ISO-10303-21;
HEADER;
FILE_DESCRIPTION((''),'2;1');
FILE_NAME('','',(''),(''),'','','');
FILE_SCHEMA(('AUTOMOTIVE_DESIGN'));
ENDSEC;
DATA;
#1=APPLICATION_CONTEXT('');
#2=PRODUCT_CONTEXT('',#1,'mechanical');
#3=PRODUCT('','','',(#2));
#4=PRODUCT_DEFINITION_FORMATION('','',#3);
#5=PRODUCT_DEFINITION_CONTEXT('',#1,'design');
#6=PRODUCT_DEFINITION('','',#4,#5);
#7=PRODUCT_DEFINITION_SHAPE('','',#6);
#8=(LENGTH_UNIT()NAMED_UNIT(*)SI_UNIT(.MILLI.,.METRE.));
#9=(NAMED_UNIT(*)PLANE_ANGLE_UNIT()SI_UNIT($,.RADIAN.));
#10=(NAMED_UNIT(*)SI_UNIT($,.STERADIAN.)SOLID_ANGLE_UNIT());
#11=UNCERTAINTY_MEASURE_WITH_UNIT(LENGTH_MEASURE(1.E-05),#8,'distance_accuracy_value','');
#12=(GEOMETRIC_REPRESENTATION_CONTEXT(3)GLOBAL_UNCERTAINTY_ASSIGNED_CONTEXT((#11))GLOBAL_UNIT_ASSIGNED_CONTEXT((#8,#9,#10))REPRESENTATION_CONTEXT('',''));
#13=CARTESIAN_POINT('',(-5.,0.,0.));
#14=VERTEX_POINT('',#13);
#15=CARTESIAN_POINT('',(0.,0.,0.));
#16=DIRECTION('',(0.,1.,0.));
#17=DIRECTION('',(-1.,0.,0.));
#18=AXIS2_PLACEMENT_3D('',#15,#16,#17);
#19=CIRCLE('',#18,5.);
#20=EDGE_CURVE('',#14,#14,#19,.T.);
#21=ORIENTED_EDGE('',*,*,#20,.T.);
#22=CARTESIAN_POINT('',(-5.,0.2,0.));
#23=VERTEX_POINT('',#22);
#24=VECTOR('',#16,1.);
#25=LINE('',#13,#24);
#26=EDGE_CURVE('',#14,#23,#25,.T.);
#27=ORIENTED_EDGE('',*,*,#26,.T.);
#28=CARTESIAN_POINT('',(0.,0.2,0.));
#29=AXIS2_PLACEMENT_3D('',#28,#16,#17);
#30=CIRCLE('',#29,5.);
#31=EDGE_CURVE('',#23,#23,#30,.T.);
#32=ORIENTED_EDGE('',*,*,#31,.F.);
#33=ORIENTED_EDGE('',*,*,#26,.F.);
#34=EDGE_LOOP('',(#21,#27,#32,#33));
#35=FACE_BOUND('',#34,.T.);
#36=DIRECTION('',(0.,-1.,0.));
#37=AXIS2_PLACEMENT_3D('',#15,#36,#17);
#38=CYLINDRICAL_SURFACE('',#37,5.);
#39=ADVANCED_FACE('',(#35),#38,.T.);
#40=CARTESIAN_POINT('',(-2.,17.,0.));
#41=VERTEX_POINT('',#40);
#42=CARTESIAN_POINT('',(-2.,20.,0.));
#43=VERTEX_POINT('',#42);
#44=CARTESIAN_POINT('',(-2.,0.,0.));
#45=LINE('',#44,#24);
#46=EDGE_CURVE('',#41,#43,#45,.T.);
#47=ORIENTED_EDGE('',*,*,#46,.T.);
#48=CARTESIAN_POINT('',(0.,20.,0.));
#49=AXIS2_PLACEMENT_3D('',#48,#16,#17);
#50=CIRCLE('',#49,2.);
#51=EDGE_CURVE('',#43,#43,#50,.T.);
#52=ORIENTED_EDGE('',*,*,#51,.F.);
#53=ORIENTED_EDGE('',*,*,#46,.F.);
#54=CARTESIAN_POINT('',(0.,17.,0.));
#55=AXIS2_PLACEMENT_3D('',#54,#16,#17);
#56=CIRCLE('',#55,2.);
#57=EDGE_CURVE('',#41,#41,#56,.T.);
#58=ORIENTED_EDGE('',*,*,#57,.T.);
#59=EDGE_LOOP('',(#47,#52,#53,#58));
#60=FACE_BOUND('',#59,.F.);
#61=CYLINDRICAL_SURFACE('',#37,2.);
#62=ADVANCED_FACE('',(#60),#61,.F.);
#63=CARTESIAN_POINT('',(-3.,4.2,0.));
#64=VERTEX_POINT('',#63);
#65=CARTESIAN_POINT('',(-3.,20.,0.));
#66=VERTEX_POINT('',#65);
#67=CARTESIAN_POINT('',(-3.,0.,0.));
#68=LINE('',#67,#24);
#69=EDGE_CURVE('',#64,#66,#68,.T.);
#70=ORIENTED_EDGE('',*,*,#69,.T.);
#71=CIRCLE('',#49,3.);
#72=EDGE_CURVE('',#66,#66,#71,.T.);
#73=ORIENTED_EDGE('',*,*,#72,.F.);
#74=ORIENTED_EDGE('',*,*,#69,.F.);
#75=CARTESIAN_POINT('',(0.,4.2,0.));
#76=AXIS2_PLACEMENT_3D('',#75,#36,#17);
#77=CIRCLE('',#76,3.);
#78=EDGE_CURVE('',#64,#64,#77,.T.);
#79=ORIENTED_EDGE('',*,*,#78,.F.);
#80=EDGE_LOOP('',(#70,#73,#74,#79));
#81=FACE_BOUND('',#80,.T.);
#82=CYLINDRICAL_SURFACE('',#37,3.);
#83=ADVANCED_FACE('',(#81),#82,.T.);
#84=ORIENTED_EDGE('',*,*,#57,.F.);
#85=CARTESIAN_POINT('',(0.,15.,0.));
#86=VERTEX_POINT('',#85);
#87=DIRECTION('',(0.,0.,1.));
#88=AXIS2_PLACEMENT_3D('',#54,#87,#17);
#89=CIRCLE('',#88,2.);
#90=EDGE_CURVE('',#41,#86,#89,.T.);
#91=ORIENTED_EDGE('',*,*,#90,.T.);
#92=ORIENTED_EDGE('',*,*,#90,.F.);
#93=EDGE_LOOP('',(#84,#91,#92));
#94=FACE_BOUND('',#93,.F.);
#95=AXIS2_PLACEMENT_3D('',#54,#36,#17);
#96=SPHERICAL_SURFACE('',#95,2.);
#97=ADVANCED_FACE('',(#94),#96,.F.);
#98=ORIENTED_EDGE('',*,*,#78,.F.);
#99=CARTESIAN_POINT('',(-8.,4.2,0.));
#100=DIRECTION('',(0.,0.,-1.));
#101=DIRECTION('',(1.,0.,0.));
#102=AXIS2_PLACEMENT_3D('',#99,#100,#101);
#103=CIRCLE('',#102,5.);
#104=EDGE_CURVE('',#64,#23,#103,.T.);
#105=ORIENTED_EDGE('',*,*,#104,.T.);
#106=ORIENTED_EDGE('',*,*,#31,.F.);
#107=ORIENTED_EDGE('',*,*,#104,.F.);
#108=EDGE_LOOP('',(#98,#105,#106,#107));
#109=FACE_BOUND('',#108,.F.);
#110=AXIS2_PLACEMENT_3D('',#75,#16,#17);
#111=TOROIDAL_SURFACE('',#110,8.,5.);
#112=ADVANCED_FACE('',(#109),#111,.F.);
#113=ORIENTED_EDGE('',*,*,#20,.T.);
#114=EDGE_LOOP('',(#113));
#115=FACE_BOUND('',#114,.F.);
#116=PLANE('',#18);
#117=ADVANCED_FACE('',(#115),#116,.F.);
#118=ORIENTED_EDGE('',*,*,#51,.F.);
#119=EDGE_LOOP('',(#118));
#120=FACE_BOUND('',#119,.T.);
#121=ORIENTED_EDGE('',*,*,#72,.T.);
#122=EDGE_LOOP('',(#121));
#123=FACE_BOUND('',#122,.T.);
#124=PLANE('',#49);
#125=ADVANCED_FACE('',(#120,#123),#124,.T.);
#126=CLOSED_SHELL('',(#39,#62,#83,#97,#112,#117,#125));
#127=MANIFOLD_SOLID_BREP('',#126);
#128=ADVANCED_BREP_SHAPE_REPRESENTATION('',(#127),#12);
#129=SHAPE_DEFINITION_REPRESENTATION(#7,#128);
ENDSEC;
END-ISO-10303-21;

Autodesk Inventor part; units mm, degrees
ref_plane "YZ Plane" through (0, 0, 0) normal (1, 0, 0) x (0, 1, 0)
ref_plane "XZ Plane" through (0, 0, 0) normal (0, 1, 0) x (-1, 0, 0)
ref_plane "XY Plane" through (0, 0, 0) normal (0, 0, 1) x (1, 0, 0)
sketch "Sketch1" plane through (0, 0, 0) normal (0, 1, 0) x (-1, 0, 0)
  circle A0 centre (0, 0) radius 2
  circle A1 centre (0, 0) radius 3
  circle A2 centre (0, 0) radius 5
  dimension "d0" = 4
  dimension "d1" = 6
  dimension "d2" = 10
extrude "Extrusion1" add sketch "Sketch1" along normal blind 0.2 contours A1 | A2
extrude "Extrusion2" add sketch "Sketch1" along normal blind 20 contours A1
fillet "Fillet1" radius 5 1 edges at (3, 0.2, 0)
extrude "Extrusion3" add sketch "Sketch1" along normal blind 15 contours A0
fillet "Fillet2" radius 2 1 edges at (2, 15, 0)
properties part number "ssd standoff"
